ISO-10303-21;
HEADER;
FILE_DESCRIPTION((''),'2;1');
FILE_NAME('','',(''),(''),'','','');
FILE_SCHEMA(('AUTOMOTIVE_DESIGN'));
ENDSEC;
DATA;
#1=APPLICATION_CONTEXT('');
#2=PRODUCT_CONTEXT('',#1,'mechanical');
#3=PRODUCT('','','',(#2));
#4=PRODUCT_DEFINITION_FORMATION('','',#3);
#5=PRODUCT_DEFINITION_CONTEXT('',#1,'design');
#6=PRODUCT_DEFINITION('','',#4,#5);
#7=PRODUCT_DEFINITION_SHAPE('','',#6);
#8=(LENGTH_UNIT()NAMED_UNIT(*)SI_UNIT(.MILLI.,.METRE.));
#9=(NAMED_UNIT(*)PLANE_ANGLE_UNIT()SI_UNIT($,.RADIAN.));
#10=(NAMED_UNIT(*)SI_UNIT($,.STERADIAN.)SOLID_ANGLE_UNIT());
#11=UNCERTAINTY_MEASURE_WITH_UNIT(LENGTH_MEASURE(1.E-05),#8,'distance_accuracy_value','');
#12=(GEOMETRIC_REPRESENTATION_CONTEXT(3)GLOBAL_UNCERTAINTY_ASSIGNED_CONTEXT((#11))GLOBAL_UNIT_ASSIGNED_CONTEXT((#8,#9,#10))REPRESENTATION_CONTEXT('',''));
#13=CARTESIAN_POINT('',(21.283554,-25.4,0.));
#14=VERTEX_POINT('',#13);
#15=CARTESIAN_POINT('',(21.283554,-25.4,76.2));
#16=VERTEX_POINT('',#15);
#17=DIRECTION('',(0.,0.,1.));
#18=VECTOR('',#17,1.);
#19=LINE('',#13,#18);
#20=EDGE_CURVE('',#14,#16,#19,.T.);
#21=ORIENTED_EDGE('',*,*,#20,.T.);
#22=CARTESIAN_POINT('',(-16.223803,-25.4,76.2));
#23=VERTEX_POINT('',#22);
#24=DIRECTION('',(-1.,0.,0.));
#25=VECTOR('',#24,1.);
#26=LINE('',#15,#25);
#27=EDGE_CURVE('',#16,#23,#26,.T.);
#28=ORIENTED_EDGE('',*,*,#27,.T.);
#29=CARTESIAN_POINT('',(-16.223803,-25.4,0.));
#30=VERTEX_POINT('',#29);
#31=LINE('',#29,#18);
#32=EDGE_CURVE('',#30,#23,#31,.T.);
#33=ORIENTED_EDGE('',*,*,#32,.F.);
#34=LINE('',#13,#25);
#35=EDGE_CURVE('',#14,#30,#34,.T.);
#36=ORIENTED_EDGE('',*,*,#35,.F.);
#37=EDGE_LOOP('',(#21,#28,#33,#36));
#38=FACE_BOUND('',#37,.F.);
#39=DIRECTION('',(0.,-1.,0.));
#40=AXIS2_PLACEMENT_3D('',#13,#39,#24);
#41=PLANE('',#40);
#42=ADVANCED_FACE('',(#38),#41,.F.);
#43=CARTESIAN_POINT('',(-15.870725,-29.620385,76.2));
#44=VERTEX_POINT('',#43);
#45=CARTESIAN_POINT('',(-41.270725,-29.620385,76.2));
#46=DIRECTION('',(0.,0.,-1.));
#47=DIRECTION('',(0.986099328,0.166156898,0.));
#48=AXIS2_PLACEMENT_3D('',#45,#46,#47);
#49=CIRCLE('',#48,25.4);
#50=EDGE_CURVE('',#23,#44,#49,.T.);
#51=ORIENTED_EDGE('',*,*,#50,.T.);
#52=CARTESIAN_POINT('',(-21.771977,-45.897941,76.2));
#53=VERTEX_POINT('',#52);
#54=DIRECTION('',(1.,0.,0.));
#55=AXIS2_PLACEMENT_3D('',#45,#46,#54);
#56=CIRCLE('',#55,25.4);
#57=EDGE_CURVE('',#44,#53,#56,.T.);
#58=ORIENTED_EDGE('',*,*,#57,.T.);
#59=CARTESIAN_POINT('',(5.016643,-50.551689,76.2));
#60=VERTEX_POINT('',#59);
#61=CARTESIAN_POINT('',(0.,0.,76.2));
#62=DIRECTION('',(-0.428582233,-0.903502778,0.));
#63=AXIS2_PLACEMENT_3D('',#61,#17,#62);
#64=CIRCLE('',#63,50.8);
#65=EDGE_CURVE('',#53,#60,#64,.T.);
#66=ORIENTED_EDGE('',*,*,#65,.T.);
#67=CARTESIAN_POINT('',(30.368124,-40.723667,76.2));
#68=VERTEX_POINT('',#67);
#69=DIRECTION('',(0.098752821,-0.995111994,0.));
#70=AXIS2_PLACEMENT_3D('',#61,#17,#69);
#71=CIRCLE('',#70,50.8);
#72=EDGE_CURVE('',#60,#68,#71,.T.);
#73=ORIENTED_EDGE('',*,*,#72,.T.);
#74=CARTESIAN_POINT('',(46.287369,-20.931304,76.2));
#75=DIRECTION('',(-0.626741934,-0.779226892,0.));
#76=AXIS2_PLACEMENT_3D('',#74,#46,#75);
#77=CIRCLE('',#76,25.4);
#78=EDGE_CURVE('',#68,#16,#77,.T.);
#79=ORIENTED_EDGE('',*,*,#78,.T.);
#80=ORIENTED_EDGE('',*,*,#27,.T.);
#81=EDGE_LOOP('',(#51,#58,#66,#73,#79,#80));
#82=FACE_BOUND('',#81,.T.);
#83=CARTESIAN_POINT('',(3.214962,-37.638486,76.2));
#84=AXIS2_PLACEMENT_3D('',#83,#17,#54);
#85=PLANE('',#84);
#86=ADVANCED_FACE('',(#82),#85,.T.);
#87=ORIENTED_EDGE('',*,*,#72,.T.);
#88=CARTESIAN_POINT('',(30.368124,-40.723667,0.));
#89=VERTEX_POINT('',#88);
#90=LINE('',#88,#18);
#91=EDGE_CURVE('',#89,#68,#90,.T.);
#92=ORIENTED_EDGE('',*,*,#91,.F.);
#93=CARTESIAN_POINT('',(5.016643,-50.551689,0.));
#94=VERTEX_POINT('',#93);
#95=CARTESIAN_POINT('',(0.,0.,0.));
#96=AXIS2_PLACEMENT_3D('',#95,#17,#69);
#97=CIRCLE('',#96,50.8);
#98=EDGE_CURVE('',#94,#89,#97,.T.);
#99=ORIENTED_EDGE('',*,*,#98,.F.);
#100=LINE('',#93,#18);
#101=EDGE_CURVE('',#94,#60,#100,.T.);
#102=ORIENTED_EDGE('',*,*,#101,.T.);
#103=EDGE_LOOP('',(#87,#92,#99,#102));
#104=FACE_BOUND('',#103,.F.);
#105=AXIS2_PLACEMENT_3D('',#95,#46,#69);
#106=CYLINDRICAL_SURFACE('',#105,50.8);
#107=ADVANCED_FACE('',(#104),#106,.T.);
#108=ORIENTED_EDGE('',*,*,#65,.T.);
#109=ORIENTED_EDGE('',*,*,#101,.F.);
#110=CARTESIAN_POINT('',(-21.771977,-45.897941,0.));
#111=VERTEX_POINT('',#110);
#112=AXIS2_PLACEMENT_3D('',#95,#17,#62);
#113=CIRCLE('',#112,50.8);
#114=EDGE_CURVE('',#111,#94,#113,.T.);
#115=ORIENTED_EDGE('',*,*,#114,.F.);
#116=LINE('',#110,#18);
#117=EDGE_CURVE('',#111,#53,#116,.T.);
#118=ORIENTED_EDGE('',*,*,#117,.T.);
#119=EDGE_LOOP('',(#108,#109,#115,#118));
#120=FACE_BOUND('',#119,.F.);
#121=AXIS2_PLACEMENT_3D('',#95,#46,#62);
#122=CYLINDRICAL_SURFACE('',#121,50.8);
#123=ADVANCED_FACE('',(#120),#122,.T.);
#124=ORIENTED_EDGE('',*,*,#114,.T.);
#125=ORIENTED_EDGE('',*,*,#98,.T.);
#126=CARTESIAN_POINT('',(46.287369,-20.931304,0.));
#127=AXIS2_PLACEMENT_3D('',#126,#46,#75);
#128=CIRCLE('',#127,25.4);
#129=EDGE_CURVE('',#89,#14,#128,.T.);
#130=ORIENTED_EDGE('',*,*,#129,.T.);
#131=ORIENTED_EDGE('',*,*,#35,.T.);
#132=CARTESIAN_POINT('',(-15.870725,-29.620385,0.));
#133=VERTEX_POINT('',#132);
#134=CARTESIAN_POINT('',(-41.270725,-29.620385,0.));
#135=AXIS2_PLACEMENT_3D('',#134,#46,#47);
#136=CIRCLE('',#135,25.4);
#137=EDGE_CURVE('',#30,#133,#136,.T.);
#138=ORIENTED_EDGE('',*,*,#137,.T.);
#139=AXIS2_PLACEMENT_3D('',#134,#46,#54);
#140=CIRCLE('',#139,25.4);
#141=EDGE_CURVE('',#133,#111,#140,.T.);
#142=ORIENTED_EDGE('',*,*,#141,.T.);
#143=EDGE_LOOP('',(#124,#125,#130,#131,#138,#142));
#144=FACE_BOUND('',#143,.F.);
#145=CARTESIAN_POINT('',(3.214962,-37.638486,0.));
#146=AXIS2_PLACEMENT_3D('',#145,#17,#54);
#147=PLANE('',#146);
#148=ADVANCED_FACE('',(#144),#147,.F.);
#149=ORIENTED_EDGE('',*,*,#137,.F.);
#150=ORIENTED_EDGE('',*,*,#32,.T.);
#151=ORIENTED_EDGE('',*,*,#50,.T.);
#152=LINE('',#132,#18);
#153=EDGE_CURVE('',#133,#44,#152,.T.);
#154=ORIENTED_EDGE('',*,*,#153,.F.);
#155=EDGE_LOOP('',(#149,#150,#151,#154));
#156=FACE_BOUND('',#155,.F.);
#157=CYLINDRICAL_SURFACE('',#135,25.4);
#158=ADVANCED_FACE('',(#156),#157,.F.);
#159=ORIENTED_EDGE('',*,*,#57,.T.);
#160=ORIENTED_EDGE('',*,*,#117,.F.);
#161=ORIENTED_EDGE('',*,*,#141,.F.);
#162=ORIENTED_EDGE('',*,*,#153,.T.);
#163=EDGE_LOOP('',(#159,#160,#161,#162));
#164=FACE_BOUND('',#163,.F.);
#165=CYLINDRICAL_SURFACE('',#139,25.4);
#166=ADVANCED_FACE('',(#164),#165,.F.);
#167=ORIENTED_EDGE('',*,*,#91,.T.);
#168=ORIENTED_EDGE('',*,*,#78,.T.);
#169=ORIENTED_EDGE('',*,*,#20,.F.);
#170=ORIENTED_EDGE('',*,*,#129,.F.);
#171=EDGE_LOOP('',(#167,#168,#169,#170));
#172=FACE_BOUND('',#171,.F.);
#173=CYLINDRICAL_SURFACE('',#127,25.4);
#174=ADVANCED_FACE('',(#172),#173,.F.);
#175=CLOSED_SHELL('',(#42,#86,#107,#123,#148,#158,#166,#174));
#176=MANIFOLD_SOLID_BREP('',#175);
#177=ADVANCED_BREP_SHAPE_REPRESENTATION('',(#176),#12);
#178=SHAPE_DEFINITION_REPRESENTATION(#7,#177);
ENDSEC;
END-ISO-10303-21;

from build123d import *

# Parameters (mm, degrees)
F1_DEPTH = 76.2


with BuildPart() as f1:
    # F0 (on Top) → F1 (new body)
    with BuildSketch(Plane.XY):
        with BuildLine():
            ThreePointArc((5.0166433221, -50.5516892871), (18.3621332827, -47.3653044043), (30.3681236725, -40.7236671312))
            ThreePointArc((30.3681236725, -40.7236671312), (24.4383893444, -33.8843769742), (21.2835539426, -25.4))
            Line((21.2835539426, -25.4), (-16.2238025261, -25.4))
            ThreePointArc((-16.2238025261, -25.4), (-15.9591486415, -27.5028208782), (-15.8707254658, -29.6203852022))
            ThreePointArc((-15.8707254658, -29.6203852022), (-17.3915692894, -38.277515229), (-21.771977458, -45.8979411038))
            ThreePointArc((-21.771977458, -45.8979411038), (-8.6948058368, -50.050378135), (5.0166433221, -50.5516892871))
        make_face()
    extrude(amount=F1_DEPTH)


solid = f1.part
